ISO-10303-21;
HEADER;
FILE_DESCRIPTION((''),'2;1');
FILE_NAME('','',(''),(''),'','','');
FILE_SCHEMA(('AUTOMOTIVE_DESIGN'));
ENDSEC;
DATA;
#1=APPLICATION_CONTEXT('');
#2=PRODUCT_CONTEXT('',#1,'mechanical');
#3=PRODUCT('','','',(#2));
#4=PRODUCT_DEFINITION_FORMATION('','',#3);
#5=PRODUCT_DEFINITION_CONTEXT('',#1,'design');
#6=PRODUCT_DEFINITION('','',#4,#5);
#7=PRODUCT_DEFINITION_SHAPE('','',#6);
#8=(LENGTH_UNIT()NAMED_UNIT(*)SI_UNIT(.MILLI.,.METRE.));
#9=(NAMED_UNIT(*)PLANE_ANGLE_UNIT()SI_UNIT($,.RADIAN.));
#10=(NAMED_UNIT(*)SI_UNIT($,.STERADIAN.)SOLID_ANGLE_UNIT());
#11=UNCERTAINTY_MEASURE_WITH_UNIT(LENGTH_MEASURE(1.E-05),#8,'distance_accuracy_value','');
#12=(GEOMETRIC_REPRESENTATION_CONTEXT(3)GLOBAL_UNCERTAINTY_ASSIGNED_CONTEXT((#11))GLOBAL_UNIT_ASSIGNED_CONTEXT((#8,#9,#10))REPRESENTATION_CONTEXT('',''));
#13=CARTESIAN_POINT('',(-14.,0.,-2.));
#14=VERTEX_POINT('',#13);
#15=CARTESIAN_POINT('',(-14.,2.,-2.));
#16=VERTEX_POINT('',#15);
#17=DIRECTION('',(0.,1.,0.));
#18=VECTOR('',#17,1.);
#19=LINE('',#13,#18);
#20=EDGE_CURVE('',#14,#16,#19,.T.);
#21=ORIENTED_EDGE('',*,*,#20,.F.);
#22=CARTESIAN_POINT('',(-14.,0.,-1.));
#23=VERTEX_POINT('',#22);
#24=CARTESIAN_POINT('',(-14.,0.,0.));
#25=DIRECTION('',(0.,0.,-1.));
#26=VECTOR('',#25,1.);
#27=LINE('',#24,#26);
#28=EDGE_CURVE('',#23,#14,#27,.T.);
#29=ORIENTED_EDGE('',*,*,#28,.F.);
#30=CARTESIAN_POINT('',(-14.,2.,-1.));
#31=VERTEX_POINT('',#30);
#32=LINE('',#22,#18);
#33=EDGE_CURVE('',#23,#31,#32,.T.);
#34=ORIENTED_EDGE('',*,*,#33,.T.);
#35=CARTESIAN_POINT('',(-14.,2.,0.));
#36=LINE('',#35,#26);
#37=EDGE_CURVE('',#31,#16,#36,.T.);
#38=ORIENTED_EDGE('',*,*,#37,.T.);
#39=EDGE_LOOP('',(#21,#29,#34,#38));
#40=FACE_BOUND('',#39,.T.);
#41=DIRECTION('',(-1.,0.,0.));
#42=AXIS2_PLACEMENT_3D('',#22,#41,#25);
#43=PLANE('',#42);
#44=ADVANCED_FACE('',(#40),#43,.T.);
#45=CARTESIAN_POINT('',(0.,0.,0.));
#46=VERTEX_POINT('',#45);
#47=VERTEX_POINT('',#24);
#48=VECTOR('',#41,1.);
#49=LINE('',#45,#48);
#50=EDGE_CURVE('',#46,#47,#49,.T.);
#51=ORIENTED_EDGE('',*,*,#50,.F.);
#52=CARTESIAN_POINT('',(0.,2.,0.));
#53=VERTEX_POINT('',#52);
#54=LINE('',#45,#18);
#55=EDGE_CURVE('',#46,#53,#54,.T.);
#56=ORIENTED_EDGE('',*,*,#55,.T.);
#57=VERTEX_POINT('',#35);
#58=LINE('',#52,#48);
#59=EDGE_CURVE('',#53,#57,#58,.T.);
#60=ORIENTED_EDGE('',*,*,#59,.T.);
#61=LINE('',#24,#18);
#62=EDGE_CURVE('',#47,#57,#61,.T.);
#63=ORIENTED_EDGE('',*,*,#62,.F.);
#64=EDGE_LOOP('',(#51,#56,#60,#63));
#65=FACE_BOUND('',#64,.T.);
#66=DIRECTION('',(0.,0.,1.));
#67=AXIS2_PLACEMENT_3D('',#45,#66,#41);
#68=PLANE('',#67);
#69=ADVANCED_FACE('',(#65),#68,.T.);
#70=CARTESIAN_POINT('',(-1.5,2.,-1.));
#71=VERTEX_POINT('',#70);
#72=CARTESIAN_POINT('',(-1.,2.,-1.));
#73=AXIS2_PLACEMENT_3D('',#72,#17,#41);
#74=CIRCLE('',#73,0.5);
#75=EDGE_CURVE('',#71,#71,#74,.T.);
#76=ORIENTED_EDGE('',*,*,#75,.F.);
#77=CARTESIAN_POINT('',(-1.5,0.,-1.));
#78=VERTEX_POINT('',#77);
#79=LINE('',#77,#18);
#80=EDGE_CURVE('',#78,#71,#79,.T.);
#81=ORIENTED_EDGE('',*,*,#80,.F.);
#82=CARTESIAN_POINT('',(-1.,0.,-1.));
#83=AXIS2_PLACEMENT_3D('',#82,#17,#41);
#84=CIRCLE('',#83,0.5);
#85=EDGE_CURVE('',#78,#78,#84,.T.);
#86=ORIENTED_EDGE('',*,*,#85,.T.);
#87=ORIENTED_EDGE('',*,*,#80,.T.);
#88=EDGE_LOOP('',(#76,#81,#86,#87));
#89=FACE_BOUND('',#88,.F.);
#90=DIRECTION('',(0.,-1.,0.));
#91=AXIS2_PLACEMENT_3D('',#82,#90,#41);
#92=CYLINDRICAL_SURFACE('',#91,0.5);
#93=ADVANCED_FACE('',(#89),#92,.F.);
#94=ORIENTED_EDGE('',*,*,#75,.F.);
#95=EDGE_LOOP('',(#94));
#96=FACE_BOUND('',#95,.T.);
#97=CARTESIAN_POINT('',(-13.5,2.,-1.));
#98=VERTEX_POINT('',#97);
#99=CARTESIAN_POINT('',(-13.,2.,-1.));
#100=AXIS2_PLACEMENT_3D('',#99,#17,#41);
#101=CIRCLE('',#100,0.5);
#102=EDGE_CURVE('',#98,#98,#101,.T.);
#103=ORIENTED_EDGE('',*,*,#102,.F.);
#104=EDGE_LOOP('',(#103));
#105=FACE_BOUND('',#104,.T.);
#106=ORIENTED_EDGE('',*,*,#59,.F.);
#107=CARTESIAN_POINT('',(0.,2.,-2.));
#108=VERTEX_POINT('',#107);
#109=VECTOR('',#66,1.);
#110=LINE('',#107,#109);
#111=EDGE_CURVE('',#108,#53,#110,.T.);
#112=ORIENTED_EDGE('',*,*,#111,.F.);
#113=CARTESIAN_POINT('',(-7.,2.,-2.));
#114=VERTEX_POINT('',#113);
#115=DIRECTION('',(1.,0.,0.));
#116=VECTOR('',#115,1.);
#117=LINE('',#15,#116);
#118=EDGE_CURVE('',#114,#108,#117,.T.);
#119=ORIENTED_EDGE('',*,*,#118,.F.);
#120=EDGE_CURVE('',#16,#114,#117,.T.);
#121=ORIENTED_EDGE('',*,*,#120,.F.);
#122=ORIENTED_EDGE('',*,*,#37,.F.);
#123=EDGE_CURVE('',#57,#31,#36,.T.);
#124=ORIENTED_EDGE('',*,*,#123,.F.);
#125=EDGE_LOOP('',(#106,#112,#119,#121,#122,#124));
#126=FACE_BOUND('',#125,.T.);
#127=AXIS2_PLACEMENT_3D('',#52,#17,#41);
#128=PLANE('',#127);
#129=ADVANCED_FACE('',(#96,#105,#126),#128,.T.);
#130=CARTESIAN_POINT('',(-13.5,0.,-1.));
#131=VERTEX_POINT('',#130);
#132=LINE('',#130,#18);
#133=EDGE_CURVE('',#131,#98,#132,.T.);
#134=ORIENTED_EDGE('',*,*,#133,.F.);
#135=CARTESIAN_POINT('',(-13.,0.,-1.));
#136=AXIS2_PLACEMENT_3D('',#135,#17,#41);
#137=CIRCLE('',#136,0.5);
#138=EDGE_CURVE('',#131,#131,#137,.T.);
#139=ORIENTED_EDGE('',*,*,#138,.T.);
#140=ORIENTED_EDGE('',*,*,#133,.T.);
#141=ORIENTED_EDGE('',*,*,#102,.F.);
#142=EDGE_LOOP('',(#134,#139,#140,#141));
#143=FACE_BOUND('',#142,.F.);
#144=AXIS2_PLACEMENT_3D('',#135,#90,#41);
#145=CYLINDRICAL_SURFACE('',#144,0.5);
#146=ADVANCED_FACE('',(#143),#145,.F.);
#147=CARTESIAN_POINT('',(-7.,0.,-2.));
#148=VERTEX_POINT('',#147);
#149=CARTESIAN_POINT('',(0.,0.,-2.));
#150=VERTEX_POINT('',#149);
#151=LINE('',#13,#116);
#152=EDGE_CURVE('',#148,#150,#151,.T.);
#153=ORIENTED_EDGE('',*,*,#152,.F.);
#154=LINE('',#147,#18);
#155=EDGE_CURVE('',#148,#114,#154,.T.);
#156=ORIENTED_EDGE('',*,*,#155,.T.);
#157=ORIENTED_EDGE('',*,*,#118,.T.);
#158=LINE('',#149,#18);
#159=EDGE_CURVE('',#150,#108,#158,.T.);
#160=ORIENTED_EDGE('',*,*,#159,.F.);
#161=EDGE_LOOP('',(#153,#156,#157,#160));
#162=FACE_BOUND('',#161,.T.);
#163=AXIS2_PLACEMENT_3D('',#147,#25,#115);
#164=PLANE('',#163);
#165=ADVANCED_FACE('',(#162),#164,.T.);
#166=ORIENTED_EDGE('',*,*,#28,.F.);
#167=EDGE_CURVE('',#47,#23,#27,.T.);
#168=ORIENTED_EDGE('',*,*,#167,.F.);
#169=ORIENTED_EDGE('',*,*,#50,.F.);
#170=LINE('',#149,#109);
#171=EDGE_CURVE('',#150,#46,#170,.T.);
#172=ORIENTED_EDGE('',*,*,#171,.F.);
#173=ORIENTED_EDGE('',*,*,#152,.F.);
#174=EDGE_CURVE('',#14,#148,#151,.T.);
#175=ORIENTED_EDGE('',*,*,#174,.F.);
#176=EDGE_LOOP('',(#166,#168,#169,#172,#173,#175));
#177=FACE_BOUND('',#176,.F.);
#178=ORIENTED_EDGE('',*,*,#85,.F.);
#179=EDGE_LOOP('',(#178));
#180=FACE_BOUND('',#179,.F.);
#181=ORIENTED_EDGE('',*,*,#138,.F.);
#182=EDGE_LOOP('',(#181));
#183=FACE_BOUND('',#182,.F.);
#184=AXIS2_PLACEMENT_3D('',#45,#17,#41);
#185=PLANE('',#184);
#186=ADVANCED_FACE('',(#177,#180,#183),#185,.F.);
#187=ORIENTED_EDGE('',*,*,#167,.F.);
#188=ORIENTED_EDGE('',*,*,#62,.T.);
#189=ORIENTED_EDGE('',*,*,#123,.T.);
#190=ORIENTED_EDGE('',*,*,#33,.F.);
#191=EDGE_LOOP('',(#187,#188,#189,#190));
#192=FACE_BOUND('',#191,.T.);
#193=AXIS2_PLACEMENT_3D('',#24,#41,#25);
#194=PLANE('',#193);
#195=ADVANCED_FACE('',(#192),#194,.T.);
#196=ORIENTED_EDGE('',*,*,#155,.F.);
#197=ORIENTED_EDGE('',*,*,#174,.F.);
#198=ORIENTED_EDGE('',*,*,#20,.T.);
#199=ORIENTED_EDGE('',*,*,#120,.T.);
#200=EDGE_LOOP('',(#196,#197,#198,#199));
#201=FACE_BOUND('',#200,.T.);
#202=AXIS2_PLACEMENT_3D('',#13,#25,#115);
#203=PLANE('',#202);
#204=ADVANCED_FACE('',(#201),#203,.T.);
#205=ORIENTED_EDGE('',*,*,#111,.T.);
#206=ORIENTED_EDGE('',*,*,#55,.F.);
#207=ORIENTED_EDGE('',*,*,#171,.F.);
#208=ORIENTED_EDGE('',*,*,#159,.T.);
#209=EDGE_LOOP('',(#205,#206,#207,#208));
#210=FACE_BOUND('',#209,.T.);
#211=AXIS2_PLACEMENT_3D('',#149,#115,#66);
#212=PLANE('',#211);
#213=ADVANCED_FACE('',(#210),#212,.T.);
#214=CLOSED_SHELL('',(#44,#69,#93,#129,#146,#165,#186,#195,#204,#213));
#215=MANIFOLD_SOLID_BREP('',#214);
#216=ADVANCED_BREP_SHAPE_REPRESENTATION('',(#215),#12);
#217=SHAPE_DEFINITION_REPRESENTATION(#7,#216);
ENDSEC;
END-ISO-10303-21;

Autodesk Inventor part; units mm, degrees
ref_plane "YZ Plane" through (0, 0, 0) normal (1, 0, 0) x (0, 1, 0)
ref_plane "XZ Plane" through (0, 0, 0) normal (0, 1, 0) x (-1, 0, 0)
ref_plane "XY Plane" through (0, 0, 0) normal (0, 0, 1) x (1, 0, 0)
sketch "Sketch1" plane through (0, 0, 0) normal (0, 1, 0) x (-1, 0, 0)
  line L0 (0, 0) -> (14, 0)
  line L1 (14, 0) -> (14, -2)
  line L2 (14, -2) -> (0, -2)
  line L3 (0, -2) -> (0, 0)
  line L4 (14, -1) -> (13, -1)
  line L5 (7, -2) -> (7, -1)
  circle A0 centre (13, -1) radius 0.5
  circle A1 centre (1, -1) radius 0.5
  dimension "d0" = 14
  dimension "d1" = 2
  dimension "d2" = 1
  dimension "d3" = 1
extrude "Extrusion1" add sketch "Sketch1" along normal blind 2
properties part number "link"
